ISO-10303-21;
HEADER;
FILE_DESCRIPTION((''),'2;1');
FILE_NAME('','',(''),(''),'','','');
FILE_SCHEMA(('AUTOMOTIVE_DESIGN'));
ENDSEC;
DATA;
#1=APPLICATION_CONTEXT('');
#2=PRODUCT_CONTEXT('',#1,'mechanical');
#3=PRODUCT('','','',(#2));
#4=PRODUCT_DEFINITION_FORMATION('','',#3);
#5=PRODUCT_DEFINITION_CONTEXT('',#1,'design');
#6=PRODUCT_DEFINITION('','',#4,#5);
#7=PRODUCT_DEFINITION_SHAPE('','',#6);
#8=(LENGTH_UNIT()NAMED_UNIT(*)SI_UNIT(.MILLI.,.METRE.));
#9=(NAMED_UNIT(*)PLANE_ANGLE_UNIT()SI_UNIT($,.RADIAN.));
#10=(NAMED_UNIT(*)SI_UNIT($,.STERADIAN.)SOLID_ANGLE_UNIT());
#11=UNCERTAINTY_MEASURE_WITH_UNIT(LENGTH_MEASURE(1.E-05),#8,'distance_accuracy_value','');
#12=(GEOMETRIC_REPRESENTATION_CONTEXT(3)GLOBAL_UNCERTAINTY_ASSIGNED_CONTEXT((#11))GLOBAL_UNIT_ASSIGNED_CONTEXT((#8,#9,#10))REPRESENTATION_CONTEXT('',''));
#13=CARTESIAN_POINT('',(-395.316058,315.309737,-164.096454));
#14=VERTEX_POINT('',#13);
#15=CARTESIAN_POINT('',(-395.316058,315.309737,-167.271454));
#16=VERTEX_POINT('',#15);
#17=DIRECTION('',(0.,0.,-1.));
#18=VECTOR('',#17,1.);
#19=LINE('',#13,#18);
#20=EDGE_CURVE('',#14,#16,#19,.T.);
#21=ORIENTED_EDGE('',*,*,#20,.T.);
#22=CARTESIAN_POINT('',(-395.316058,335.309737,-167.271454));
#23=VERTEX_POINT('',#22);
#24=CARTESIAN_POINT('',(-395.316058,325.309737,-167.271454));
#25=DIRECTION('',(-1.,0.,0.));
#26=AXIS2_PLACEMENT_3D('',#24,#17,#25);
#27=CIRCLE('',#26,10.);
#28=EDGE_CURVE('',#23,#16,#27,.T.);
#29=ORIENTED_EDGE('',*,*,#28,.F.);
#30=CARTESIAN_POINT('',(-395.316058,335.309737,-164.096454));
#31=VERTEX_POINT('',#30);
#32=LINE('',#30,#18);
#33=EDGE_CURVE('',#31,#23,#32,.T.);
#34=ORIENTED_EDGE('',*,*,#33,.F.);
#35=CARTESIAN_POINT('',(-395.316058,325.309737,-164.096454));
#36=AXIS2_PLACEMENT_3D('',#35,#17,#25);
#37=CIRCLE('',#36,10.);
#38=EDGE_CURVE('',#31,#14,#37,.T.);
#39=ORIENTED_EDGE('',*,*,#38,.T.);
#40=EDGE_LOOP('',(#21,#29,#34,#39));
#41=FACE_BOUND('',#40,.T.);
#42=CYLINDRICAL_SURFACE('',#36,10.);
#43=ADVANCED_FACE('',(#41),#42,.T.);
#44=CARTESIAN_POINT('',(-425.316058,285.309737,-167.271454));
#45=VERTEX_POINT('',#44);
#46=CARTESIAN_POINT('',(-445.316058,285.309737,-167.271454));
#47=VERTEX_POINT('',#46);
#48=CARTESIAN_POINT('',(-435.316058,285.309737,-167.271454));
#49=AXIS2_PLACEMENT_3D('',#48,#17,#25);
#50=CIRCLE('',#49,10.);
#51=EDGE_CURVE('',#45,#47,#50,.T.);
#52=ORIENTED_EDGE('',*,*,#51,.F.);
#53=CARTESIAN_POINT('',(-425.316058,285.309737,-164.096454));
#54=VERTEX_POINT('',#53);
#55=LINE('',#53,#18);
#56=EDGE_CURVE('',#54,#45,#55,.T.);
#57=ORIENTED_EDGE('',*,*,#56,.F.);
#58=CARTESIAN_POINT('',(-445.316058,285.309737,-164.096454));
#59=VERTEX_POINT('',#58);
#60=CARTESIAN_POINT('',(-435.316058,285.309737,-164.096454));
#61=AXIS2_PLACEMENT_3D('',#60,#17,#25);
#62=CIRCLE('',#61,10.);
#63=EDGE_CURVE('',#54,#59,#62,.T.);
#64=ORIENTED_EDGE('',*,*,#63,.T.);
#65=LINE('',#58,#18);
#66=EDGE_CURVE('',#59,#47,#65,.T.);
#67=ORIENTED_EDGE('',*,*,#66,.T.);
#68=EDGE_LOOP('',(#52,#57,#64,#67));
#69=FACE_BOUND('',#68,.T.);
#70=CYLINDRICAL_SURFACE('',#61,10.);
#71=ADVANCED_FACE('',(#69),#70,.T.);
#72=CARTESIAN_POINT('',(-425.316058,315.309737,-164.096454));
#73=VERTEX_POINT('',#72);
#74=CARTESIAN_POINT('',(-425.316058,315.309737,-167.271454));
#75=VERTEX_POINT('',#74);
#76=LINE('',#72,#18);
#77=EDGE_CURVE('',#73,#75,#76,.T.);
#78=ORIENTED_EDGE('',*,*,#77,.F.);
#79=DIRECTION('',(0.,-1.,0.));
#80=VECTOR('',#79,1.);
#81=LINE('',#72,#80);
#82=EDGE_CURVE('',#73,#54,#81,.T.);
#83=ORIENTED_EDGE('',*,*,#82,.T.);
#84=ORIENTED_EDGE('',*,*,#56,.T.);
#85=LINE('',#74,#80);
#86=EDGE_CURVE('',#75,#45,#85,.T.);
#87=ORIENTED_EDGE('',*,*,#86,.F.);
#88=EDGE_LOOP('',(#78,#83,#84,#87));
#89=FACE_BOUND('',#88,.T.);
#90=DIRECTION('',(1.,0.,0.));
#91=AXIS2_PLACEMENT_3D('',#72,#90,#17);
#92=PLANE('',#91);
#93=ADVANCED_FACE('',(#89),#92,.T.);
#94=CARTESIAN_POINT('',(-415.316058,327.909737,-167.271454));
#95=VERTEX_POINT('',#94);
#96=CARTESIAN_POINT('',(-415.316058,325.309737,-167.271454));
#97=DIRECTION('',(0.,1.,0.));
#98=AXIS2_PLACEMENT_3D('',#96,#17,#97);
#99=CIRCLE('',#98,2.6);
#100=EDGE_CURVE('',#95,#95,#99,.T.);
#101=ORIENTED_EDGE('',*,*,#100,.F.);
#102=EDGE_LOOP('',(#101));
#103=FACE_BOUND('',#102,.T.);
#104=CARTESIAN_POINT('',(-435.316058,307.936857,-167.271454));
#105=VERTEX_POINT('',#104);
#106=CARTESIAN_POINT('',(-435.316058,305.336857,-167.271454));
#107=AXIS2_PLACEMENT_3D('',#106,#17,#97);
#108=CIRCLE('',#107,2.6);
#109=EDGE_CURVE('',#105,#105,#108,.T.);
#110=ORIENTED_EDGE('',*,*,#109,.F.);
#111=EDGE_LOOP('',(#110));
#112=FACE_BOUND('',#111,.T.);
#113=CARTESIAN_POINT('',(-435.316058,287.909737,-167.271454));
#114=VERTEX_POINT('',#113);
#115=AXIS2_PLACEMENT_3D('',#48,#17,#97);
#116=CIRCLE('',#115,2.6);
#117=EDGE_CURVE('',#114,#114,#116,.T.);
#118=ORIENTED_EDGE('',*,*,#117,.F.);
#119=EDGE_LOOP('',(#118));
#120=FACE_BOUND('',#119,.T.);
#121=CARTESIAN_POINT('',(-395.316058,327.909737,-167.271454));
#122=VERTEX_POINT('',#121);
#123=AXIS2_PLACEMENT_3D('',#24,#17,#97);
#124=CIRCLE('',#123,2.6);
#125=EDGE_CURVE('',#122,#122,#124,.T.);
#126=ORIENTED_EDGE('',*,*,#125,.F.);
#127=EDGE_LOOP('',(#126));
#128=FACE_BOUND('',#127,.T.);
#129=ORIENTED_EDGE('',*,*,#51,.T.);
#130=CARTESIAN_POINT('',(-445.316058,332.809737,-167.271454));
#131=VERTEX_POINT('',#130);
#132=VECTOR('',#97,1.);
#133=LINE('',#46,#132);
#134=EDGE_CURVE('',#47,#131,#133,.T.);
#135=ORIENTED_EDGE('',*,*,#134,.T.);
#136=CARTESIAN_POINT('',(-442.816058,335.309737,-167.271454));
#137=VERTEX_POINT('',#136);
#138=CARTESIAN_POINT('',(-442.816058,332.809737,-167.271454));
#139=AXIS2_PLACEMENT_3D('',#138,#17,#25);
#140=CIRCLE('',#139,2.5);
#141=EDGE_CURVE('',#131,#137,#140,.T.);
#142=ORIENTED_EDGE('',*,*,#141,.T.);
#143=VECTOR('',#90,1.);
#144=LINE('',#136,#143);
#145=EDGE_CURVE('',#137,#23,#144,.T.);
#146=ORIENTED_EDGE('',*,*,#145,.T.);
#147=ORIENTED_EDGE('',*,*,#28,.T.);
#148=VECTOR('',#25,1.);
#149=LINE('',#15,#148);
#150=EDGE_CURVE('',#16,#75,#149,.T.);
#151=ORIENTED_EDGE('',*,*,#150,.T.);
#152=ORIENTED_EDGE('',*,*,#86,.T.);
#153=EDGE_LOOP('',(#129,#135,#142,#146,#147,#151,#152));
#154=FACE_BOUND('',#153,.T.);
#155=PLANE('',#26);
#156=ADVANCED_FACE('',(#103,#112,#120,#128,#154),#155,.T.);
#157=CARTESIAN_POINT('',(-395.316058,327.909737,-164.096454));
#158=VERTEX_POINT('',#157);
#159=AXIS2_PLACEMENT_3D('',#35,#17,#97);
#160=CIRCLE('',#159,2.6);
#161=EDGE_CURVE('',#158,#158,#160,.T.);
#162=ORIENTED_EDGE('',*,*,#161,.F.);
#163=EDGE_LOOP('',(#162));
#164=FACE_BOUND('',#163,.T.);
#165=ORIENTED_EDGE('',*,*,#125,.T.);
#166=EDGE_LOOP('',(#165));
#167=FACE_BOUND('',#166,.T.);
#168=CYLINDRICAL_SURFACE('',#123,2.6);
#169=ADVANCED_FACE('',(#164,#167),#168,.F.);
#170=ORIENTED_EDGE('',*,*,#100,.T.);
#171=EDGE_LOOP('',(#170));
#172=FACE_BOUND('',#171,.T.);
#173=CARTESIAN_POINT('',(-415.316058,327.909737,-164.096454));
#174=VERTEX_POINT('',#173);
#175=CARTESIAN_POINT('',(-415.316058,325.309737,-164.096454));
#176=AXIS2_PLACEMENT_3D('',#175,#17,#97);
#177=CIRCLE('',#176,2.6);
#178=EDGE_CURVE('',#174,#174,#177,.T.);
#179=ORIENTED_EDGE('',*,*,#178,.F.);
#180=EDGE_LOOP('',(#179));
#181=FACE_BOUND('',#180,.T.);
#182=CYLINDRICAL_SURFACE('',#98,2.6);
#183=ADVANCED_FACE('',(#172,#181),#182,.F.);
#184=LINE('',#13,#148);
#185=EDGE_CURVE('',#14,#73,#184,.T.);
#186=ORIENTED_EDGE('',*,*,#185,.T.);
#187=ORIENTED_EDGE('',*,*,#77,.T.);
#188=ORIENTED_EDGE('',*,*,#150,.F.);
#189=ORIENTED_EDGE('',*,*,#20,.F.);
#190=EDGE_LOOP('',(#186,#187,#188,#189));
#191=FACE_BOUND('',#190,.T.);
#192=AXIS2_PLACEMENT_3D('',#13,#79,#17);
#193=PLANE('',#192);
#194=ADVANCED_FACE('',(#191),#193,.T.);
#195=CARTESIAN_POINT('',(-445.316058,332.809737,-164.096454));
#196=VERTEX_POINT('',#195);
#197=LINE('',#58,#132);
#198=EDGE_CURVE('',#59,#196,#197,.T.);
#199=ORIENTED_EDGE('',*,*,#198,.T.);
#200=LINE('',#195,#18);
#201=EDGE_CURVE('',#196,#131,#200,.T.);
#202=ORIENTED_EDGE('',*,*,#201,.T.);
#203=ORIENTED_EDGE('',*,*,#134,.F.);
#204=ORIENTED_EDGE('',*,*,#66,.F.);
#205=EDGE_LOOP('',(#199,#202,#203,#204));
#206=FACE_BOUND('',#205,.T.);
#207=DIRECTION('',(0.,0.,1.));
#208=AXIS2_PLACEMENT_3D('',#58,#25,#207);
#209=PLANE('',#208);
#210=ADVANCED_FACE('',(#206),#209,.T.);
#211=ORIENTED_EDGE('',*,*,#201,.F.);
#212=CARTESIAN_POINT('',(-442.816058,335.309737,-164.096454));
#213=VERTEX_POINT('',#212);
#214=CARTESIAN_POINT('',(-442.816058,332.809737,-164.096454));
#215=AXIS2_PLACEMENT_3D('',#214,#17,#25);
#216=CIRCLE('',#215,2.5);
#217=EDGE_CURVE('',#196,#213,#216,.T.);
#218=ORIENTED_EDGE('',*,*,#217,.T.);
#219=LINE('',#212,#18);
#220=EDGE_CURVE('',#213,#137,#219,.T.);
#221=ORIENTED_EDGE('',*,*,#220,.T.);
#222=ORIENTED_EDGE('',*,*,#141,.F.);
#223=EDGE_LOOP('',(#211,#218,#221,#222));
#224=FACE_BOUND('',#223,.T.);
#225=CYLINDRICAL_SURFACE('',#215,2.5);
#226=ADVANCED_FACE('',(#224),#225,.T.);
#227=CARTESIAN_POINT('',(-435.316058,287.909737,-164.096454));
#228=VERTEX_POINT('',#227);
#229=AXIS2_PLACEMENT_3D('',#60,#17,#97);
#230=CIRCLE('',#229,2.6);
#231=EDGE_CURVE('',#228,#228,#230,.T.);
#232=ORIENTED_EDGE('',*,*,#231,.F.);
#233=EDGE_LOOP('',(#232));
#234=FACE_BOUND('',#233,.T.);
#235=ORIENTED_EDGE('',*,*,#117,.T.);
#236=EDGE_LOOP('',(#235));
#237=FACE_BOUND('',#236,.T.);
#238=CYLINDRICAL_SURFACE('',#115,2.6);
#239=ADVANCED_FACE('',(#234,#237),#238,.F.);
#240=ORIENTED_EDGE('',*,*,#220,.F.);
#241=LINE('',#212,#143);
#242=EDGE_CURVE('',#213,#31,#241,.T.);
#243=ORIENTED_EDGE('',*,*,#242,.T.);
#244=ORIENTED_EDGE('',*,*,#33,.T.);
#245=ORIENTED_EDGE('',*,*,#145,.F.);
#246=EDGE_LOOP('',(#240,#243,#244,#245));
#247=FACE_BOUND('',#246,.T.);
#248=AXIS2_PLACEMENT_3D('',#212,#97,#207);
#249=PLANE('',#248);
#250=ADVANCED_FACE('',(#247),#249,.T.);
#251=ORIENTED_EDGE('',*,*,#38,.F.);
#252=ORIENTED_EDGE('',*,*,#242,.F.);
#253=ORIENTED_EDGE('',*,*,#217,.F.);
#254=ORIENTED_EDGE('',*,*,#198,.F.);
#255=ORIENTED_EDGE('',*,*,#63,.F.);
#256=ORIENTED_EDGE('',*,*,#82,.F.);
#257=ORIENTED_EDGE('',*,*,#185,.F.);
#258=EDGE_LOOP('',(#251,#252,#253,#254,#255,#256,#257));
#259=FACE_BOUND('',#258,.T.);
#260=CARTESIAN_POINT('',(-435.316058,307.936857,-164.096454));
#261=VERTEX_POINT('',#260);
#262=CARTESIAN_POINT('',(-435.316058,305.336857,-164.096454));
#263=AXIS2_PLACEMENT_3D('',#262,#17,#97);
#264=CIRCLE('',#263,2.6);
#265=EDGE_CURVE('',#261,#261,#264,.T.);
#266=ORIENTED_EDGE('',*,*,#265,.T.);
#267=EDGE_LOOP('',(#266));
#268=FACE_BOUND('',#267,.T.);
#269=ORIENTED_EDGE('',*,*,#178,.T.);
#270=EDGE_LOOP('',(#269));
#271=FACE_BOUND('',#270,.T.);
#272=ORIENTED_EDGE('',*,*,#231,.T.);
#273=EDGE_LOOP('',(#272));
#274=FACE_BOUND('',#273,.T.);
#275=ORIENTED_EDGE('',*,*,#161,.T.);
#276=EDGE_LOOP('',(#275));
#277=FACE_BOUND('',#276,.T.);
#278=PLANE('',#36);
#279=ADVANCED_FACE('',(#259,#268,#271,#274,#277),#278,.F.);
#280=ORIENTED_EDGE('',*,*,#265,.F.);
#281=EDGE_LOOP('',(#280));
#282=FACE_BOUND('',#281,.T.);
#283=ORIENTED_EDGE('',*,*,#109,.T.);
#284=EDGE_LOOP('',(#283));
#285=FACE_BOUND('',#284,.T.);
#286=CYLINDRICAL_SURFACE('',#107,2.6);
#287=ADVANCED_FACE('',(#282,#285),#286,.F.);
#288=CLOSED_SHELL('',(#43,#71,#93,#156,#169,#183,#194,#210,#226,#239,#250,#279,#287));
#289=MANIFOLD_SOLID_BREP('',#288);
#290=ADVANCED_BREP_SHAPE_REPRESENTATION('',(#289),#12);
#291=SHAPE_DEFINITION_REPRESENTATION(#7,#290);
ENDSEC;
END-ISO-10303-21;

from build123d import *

# Parameters (mm, degrees)
BASE_FLANGE1_DEPTH         = 3.175
F_5_2_5_2_DIAMETER_HOLE1_D = 5.2


# Sheet-metal steps are written as plain solids
with BuildPart() as part:
    # Sketch11 → Base-Flange1 (new body)
    with BuildSketch(Plane(origin=(0, 0, -167.271453779), x_dir=(-1, 0, 0), z_dir=(0, 0, -1))):
        with BuildLine():
            Line((395.316058397, 315.309736729), (425.316058397, 315.309736729))
            Line((425.316058397, 315.309736729), (425.316058397, 285.309736729))
            ThreePointArc((425.316058397, 285.309736729), (435.316058397, 275.309736729), (445.316058397, 285.309736729))
            Line((445.316058397, 285.309736729), (445.316058397, 332.809736729))
            ThreePointArc((445.316058397, 332.809736729), (444.58382535, 334.577503682), (442.816058397, 335.309736729))
            Line((442.816058397, 335.309736729), (395.316058397, 335.309736729))
            ThreePointArc((395.316058397, 335.309736729), (385.316058397, 325.309736729), (395.316058397, 315.309736729))
        make_face()
    extrude(amount=-BASE_FLANGE1_DEPTH)

    # Ø5.2 (5.2) Diameter Hole1 (through all)
    with Locations(Plane(origin=(0, 0, -167.271453779), x_dir=(-1, 0, 0), z_dir=(0, 0, -1))):
        with Locations((435.316058397, 285.309736729), (395.316058397, 325.309736729), (415.316058397, 325.309736729), (435.316058397, 305.336856842)):
            Hole(F_5_2_5_2_DIAMETER_HOLE1_D / 2)


solid = part.part
